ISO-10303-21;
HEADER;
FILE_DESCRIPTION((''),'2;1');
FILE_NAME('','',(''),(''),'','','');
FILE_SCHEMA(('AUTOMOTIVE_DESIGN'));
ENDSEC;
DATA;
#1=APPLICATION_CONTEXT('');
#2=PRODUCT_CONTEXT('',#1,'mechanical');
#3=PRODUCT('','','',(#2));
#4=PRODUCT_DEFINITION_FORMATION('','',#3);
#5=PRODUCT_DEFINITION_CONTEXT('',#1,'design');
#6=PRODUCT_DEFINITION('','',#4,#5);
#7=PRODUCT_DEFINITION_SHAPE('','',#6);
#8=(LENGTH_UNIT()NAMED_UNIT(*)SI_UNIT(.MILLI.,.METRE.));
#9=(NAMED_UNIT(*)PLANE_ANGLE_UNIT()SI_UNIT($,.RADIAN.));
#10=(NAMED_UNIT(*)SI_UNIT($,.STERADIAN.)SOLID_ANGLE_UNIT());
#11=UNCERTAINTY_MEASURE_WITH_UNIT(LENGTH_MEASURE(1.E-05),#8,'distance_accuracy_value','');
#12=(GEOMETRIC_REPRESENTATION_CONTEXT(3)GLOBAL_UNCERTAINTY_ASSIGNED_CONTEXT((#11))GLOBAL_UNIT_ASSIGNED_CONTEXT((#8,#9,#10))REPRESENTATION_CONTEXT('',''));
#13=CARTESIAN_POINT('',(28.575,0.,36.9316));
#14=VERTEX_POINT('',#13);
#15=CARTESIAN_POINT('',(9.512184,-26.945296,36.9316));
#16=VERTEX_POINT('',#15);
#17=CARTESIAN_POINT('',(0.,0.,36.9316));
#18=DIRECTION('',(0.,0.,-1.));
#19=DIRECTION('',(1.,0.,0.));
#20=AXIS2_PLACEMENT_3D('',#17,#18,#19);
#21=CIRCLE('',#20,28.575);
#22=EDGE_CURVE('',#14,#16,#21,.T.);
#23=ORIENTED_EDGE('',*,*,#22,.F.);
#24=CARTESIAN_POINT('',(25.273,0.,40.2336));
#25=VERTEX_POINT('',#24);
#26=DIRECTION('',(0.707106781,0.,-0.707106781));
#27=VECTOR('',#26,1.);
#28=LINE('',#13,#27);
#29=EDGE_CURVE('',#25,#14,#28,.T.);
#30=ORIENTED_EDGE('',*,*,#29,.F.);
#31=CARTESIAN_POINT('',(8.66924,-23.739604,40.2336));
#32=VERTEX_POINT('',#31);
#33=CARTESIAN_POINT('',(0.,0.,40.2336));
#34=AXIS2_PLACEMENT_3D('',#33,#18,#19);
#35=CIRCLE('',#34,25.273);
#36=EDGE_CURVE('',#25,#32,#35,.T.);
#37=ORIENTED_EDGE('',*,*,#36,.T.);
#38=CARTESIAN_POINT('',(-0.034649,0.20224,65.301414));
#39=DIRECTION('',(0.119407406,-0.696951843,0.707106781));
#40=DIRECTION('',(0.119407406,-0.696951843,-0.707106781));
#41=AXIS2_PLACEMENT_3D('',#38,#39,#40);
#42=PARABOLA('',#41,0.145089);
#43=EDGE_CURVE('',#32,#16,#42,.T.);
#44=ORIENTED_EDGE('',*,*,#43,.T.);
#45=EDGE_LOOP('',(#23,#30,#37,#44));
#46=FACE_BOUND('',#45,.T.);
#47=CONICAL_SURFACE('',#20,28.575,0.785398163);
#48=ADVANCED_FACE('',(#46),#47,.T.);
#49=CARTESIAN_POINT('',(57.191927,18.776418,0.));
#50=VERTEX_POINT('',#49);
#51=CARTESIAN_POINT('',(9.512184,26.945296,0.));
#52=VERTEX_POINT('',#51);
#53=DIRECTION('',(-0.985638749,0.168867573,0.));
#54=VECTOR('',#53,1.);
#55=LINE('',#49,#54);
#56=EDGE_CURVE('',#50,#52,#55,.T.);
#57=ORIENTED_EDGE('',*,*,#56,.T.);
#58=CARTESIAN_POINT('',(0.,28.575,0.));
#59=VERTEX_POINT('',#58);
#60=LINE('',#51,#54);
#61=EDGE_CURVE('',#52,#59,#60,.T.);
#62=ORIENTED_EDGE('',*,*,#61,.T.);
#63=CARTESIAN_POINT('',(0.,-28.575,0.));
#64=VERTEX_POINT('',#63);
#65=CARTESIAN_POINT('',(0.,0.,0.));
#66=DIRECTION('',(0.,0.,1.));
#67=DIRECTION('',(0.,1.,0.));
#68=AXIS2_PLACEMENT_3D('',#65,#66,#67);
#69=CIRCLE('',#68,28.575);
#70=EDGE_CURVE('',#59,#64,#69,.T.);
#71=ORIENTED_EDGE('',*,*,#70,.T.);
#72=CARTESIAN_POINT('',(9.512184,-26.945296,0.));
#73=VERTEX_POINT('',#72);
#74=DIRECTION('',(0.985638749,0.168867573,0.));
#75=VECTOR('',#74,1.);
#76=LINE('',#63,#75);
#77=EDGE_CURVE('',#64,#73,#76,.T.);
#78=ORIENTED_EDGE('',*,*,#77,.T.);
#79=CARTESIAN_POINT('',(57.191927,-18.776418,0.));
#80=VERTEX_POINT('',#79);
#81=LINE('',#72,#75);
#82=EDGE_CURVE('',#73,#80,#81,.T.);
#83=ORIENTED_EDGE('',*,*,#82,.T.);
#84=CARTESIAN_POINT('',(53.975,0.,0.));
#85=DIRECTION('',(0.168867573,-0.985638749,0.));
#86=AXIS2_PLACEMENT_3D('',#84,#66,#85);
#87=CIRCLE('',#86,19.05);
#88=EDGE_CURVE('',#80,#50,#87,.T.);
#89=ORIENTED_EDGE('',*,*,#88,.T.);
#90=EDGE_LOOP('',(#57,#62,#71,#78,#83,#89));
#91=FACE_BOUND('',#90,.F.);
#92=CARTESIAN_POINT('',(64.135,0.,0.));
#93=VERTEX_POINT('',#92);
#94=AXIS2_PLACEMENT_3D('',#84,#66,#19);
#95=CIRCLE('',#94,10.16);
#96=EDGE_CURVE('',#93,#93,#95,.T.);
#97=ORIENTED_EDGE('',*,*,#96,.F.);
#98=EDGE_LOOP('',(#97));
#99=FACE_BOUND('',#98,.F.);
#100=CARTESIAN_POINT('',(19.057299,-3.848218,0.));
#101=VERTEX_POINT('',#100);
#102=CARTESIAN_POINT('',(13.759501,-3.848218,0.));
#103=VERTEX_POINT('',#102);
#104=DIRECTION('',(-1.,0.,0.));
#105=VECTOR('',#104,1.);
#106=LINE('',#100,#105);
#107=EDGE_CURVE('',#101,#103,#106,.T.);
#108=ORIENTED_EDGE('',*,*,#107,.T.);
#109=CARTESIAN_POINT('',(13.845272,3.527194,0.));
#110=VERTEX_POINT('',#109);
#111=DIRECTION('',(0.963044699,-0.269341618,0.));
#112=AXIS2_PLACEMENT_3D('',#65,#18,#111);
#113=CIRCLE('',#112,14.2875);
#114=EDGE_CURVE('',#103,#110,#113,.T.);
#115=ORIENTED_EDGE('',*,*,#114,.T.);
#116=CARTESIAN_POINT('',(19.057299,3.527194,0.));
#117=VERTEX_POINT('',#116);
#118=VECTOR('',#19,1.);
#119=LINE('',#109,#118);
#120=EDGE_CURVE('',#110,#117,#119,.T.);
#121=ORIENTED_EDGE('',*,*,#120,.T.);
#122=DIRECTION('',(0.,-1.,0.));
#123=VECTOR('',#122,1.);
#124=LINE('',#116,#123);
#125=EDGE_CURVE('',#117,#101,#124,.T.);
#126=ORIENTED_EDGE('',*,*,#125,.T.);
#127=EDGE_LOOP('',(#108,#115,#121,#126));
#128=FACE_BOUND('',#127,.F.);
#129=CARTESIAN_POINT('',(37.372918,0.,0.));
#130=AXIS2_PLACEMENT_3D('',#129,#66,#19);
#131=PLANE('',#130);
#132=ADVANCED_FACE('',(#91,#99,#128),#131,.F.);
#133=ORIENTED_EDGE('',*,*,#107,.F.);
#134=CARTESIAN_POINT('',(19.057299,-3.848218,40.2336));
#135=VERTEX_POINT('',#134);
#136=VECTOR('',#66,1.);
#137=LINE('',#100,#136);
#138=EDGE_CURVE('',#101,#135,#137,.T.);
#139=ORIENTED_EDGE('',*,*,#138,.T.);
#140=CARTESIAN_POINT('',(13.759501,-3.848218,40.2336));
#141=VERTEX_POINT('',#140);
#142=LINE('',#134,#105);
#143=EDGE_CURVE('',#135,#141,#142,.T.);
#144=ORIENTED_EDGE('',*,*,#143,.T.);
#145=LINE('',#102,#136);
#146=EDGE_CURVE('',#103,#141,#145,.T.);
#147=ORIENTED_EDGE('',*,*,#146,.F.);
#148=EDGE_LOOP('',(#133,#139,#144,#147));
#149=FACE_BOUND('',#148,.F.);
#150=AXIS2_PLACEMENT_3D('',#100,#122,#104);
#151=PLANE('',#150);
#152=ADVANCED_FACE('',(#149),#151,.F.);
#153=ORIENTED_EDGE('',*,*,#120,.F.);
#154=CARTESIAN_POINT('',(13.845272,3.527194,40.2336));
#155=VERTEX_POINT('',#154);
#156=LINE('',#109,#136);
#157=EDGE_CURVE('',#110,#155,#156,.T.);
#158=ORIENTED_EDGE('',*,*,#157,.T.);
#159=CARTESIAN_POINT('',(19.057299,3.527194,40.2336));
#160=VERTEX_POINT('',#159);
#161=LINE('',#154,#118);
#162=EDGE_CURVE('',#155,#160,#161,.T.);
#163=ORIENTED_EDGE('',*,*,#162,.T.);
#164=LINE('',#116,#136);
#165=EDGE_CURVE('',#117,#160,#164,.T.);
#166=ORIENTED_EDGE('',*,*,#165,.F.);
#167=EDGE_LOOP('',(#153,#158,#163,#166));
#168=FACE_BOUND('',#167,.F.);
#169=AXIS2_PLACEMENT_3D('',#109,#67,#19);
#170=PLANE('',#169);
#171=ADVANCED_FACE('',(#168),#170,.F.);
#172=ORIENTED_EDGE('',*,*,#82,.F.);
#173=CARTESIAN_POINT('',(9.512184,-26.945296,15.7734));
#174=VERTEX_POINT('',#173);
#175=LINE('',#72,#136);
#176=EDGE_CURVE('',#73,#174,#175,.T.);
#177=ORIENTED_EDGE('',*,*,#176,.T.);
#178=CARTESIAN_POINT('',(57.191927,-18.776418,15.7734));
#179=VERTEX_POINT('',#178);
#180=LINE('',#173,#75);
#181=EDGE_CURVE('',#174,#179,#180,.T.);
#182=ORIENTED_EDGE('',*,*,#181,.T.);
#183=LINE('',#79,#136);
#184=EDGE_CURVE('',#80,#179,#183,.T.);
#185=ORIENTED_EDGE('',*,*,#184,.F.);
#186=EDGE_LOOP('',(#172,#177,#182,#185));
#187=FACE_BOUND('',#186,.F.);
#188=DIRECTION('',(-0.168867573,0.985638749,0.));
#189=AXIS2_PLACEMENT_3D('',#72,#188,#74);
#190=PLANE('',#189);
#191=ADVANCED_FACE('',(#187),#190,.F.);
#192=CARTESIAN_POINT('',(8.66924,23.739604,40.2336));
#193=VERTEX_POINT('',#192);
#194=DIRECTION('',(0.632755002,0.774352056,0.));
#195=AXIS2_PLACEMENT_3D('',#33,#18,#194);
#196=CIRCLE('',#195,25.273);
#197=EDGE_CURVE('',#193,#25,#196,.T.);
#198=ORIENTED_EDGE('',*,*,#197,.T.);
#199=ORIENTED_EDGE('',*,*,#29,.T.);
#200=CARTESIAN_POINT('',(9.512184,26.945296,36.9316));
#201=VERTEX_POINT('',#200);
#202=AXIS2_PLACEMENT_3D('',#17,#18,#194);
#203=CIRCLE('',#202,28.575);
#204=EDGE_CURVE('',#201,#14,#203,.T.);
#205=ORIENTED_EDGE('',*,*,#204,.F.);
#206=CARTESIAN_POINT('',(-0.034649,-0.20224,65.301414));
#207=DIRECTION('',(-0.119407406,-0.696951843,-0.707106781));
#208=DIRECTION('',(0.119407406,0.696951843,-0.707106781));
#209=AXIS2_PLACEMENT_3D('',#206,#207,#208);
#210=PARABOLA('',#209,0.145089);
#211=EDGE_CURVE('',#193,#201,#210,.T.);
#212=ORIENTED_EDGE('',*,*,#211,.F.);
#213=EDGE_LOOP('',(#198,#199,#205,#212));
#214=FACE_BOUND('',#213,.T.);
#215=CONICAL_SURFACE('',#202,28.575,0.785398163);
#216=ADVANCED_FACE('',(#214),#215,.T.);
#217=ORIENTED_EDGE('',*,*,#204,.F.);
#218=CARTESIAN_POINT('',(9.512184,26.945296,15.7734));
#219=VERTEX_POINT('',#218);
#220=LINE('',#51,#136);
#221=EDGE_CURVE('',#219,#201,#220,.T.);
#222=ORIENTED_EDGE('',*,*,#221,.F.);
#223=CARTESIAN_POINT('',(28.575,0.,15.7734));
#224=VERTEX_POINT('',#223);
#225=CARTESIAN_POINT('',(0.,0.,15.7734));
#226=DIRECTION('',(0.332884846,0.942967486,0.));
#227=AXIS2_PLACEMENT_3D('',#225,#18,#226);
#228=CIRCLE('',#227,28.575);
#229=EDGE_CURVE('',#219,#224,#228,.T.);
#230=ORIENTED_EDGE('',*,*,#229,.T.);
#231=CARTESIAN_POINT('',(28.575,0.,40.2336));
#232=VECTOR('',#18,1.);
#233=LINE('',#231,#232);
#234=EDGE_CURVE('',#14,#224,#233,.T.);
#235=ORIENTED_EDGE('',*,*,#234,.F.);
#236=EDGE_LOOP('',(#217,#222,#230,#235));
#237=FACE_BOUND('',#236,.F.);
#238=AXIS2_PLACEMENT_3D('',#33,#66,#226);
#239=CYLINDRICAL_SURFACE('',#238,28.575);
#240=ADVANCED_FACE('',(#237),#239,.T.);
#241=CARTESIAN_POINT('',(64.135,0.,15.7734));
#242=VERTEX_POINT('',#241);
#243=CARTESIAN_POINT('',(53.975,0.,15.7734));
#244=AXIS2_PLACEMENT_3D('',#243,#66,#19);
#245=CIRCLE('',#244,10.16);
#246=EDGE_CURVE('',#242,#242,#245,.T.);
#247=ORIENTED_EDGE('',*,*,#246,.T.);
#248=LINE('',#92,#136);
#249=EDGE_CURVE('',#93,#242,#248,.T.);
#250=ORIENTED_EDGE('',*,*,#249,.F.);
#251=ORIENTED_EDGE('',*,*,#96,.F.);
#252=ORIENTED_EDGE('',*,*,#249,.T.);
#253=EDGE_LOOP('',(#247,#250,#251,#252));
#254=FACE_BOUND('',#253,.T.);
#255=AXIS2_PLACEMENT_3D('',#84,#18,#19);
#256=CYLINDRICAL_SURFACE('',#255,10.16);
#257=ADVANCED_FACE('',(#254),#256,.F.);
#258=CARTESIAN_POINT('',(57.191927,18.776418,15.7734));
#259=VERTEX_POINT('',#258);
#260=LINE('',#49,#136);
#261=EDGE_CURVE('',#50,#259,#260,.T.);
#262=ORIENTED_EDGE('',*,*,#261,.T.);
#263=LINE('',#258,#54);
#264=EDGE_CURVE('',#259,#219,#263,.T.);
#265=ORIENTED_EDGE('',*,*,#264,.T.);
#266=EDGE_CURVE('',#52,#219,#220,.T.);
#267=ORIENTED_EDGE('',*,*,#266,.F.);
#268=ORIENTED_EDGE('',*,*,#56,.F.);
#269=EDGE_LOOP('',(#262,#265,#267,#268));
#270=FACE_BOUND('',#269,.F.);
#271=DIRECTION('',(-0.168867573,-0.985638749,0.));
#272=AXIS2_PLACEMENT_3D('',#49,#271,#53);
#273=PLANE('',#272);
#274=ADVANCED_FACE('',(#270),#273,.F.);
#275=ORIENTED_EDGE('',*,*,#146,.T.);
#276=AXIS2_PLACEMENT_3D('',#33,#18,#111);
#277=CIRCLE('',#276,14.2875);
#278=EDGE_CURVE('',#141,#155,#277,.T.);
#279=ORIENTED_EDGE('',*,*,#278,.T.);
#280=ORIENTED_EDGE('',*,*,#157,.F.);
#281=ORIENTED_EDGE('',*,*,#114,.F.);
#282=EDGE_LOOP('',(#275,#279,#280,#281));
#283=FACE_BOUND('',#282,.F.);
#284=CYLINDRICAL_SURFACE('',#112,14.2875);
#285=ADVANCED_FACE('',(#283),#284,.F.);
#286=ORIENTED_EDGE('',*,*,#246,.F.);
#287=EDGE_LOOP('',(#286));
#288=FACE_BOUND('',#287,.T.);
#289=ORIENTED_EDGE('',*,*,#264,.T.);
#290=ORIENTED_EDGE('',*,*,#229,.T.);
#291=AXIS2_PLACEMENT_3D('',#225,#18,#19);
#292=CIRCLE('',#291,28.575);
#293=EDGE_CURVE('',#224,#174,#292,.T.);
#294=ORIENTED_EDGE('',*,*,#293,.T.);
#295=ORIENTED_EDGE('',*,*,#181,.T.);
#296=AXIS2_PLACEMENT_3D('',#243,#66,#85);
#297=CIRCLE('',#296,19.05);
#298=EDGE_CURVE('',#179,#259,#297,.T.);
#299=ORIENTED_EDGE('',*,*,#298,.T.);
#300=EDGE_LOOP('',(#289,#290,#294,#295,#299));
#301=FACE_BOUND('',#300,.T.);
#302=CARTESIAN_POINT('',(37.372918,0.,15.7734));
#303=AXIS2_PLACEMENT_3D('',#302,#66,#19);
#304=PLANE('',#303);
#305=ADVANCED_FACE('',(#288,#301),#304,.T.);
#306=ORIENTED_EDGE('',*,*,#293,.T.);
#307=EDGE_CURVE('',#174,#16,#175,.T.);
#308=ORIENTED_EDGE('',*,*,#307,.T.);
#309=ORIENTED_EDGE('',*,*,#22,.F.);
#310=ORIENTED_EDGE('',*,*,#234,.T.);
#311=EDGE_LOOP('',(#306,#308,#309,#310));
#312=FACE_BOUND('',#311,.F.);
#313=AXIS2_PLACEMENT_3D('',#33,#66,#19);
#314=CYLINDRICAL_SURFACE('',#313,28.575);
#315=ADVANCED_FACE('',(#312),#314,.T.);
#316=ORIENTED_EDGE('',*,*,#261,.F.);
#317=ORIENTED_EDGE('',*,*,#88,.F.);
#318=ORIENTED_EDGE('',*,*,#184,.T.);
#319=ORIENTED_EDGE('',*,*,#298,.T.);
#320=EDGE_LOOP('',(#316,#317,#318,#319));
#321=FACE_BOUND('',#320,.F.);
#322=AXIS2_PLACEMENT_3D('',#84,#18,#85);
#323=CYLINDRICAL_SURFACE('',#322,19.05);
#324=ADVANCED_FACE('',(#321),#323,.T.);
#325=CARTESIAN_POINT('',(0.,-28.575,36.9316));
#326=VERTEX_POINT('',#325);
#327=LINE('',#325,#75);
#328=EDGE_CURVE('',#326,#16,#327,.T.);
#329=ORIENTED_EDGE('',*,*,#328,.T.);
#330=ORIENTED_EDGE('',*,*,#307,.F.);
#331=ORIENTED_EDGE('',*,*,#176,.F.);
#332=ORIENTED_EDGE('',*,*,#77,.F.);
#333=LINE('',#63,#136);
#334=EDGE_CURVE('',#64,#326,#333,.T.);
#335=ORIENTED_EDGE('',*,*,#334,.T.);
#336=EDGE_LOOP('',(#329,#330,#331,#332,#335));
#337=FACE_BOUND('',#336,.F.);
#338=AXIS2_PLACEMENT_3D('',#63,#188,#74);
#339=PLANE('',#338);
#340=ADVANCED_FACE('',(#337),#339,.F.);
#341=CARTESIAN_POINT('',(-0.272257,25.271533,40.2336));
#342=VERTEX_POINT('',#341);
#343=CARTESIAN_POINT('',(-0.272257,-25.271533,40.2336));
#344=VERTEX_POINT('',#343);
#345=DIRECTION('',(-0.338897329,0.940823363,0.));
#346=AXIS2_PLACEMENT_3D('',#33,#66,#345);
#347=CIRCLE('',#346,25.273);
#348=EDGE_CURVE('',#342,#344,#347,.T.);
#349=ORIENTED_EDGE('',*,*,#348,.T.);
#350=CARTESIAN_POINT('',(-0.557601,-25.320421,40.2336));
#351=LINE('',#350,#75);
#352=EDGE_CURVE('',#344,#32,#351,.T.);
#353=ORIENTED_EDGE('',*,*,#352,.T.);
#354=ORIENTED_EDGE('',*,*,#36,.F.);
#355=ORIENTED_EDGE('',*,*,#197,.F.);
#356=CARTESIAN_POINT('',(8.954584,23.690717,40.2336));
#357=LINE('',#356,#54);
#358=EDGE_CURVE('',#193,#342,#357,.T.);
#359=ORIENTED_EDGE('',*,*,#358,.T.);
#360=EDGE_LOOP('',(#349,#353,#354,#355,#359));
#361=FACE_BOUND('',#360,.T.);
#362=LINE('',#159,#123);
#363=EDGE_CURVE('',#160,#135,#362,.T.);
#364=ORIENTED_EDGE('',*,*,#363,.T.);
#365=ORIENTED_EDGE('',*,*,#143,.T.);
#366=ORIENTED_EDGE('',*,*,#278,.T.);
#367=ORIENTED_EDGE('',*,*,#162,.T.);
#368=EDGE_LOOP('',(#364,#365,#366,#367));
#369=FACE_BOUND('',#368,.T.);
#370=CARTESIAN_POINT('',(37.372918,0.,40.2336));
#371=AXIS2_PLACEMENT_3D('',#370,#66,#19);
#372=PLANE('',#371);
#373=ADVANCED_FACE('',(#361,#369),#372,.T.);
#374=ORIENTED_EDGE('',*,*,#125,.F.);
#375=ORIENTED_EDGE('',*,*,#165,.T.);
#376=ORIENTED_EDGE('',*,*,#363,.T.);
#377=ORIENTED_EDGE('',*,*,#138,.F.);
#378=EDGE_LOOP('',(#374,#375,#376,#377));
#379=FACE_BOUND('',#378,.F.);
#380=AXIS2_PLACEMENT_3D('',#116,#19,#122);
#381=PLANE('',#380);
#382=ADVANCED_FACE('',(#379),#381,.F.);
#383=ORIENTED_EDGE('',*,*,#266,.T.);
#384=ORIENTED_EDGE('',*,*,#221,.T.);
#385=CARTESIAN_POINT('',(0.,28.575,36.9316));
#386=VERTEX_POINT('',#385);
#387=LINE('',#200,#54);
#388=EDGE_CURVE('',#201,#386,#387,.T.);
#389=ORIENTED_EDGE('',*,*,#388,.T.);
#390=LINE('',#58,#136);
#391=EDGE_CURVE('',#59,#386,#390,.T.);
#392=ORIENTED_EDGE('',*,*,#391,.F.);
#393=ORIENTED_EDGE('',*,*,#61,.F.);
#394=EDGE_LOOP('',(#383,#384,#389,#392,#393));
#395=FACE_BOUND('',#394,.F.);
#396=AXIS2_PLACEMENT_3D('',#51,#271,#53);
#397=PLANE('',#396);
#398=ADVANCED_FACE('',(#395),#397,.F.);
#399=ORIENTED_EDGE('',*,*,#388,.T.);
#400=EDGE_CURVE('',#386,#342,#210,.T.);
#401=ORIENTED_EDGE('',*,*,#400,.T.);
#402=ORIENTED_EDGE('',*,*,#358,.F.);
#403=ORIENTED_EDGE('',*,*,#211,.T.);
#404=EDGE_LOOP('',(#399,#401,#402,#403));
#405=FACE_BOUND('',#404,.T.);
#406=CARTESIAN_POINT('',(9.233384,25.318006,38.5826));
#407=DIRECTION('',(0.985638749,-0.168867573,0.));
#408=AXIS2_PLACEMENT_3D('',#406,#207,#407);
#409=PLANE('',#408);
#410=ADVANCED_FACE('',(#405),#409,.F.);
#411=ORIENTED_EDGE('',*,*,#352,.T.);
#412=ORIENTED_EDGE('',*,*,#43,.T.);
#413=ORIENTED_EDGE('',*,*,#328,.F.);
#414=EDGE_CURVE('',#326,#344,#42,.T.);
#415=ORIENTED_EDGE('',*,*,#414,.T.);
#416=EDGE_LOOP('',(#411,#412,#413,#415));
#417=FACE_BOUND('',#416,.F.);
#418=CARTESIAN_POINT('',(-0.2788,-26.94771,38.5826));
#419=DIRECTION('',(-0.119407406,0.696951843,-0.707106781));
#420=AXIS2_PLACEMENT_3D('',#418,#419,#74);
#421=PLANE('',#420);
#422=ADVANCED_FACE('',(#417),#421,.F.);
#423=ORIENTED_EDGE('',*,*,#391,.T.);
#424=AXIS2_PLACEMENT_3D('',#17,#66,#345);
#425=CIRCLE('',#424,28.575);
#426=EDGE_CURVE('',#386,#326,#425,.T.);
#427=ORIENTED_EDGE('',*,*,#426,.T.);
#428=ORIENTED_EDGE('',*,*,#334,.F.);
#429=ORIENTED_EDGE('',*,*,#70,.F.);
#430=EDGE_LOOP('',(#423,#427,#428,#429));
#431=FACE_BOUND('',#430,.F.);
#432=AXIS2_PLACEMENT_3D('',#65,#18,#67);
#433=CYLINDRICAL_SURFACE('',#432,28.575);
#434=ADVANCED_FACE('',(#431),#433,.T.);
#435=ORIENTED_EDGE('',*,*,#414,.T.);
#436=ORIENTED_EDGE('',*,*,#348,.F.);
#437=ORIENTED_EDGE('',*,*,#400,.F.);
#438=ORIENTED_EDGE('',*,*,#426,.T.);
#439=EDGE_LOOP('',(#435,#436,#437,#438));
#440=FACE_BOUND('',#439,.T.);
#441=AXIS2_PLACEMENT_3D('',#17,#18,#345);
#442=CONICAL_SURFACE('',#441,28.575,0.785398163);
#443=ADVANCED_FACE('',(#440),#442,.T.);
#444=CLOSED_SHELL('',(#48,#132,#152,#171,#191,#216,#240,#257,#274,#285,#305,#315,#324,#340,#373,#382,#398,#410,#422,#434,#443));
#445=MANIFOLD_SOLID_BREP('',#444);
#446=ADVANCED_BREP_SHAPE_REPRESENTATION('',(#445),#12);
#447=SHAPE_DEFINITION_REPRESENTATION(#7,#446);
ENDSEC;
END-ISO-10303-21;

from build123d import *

# Parameters (mm, degrees)
F0_R       = 10.16
F1_DEPTH   = 40.2336
F2_R       = 10.16
F3_DEPTH   = 24.4602
F4_C1_SIZE = 3.302
F4_C2_SIZE = 3.302
F4_C3_SIZE = 3.302
F4_C4_SIZE = 3.302


with BuildPart() as f1:
    # F0 (on Top) → F1 (new body)
    with BuildSketch(Plane.XY):
        with BuildLine():
            Line((57.1919272622, 18.7764181619), (9.5121844836, 26.9452959039))
            ThreePointArc((9.5121844836, 26.9452959039), (23.3274655355, 16.5033322905), (28.575, 0))
            ThreePointArc((28.575, 0), (23.3274655355, -16.5033322905), (9.5121844836, -26.9452959039))
            Line((9.5121844836, -26.9452959039), (57.1919272622, -18.7764181619))
            ThreePointArc((57.1919272622, -18.7764181619), (73.025, 0), (57.1919272622, 18.7764181619))
        make_face()
        with Locations((53.975, 0)):
            Circle(F0_R, mode=Mode.SUBTRACT)
        with BuildLine():
            Line((9.5121844836, 26.9452959039), (0, 28.575))
            ThreePointArc((0, 28.575), (-28.575, 0), (0, -28.575))
            Line((0, -28.575), (9.5121844836, -26.9452959039))
            ThreePointArc((9.5121844836, -26.9452959039), (23.3274655355, -16.5033322905), (28.575, 0))
            ThreePointArc((28.575, 0), (23.3274655355, 16.5033322905), (9.5121844836, 26.9452959039))
        make_face()
        with BuildLine():
            ThreePointArc((13.7595011415, -3.8482183654), (-14.2865339733, 0.1661423458), (13.845272005, 3.5271942616))
            Line((13.845272005, 3.5271942616), (19.0572988585, 3.5271942616))
            Line((19.0572988585, 3.5271942616), (19.0572988585, -3.8482183654))
            Line((19.0572988585, -3.8482183654), (13.7595011415, -3.8482183654))
        make_face(mode=Mode.SUBTRACT)
    extrude(amount=F1_DEPTH)

    # F2 (on face) → F3 (cut)
    with BuildSketch(Plane.XY.offset(40.2336)):
        with BuildLine():
            Line((57.1919272622, 18.7764181619), (9.5121844836, 26.9452959039))
            ThreePointArc((9.5121844836, 26.9452959039), (23.3274655355, 16.5033322905), (28.575, 0))
            ThreePointArc((28.575, 0), (23.3274655355, -16.5033322905), (9.5121844836, -26.9452959039))
            Line((9.5121844836, -26.9452959039), (57.1919272622, -18.7764181619))
            ThreePointArc((57.1919272622, -18.7764181619), (73.025, 0), (57.1919272622, 18.7764181619))
        make_face()
        with Locations((53.975, 0)):
            Circle(F2_R, mode=Mode.SUBTRACT)
    extrude(amount=-F3_DEPTH, mode=Mode.SUBTRACT)

    # F4: chamfer of 3.302 on 4 edges, made by hand

    # F4_c1
    f4_c1_edges = [f1.edges().sort_by_distance(p)[0] for p in [
        (4.7560922418, 27.760147952, 40.2336),
    ]]
    chamfer(f4_c1_edges, length=F4_C1_SIZE)

    # F4_c2
    f4_c2_edges = [f1.edges().sort_by_distance(p)[0] for p in [
        (4.7560922418, -27.760147952, 40.2336),
    ]]
    chamfer(f4_c2_edges, length=F4_C2_SIZE)

    # F4_c3
    f4_c3_edges = [f1.edges().sort_by_distance(p)[0] for p in [
        (-28.575, 0, 40.2336),
    ]]
    chamfer(f4_c3_edges, length=F4_C3_SIZE)

    # F4_c4
    f4_c4_edges = [f1.edges().sort_by_distance(p)[0] for p in [
        (28.575, 0, 40.2336),
    ]]
    chamfer(f4_c4_edges, length=F4_C4_SIZE)


solid = f1.part
